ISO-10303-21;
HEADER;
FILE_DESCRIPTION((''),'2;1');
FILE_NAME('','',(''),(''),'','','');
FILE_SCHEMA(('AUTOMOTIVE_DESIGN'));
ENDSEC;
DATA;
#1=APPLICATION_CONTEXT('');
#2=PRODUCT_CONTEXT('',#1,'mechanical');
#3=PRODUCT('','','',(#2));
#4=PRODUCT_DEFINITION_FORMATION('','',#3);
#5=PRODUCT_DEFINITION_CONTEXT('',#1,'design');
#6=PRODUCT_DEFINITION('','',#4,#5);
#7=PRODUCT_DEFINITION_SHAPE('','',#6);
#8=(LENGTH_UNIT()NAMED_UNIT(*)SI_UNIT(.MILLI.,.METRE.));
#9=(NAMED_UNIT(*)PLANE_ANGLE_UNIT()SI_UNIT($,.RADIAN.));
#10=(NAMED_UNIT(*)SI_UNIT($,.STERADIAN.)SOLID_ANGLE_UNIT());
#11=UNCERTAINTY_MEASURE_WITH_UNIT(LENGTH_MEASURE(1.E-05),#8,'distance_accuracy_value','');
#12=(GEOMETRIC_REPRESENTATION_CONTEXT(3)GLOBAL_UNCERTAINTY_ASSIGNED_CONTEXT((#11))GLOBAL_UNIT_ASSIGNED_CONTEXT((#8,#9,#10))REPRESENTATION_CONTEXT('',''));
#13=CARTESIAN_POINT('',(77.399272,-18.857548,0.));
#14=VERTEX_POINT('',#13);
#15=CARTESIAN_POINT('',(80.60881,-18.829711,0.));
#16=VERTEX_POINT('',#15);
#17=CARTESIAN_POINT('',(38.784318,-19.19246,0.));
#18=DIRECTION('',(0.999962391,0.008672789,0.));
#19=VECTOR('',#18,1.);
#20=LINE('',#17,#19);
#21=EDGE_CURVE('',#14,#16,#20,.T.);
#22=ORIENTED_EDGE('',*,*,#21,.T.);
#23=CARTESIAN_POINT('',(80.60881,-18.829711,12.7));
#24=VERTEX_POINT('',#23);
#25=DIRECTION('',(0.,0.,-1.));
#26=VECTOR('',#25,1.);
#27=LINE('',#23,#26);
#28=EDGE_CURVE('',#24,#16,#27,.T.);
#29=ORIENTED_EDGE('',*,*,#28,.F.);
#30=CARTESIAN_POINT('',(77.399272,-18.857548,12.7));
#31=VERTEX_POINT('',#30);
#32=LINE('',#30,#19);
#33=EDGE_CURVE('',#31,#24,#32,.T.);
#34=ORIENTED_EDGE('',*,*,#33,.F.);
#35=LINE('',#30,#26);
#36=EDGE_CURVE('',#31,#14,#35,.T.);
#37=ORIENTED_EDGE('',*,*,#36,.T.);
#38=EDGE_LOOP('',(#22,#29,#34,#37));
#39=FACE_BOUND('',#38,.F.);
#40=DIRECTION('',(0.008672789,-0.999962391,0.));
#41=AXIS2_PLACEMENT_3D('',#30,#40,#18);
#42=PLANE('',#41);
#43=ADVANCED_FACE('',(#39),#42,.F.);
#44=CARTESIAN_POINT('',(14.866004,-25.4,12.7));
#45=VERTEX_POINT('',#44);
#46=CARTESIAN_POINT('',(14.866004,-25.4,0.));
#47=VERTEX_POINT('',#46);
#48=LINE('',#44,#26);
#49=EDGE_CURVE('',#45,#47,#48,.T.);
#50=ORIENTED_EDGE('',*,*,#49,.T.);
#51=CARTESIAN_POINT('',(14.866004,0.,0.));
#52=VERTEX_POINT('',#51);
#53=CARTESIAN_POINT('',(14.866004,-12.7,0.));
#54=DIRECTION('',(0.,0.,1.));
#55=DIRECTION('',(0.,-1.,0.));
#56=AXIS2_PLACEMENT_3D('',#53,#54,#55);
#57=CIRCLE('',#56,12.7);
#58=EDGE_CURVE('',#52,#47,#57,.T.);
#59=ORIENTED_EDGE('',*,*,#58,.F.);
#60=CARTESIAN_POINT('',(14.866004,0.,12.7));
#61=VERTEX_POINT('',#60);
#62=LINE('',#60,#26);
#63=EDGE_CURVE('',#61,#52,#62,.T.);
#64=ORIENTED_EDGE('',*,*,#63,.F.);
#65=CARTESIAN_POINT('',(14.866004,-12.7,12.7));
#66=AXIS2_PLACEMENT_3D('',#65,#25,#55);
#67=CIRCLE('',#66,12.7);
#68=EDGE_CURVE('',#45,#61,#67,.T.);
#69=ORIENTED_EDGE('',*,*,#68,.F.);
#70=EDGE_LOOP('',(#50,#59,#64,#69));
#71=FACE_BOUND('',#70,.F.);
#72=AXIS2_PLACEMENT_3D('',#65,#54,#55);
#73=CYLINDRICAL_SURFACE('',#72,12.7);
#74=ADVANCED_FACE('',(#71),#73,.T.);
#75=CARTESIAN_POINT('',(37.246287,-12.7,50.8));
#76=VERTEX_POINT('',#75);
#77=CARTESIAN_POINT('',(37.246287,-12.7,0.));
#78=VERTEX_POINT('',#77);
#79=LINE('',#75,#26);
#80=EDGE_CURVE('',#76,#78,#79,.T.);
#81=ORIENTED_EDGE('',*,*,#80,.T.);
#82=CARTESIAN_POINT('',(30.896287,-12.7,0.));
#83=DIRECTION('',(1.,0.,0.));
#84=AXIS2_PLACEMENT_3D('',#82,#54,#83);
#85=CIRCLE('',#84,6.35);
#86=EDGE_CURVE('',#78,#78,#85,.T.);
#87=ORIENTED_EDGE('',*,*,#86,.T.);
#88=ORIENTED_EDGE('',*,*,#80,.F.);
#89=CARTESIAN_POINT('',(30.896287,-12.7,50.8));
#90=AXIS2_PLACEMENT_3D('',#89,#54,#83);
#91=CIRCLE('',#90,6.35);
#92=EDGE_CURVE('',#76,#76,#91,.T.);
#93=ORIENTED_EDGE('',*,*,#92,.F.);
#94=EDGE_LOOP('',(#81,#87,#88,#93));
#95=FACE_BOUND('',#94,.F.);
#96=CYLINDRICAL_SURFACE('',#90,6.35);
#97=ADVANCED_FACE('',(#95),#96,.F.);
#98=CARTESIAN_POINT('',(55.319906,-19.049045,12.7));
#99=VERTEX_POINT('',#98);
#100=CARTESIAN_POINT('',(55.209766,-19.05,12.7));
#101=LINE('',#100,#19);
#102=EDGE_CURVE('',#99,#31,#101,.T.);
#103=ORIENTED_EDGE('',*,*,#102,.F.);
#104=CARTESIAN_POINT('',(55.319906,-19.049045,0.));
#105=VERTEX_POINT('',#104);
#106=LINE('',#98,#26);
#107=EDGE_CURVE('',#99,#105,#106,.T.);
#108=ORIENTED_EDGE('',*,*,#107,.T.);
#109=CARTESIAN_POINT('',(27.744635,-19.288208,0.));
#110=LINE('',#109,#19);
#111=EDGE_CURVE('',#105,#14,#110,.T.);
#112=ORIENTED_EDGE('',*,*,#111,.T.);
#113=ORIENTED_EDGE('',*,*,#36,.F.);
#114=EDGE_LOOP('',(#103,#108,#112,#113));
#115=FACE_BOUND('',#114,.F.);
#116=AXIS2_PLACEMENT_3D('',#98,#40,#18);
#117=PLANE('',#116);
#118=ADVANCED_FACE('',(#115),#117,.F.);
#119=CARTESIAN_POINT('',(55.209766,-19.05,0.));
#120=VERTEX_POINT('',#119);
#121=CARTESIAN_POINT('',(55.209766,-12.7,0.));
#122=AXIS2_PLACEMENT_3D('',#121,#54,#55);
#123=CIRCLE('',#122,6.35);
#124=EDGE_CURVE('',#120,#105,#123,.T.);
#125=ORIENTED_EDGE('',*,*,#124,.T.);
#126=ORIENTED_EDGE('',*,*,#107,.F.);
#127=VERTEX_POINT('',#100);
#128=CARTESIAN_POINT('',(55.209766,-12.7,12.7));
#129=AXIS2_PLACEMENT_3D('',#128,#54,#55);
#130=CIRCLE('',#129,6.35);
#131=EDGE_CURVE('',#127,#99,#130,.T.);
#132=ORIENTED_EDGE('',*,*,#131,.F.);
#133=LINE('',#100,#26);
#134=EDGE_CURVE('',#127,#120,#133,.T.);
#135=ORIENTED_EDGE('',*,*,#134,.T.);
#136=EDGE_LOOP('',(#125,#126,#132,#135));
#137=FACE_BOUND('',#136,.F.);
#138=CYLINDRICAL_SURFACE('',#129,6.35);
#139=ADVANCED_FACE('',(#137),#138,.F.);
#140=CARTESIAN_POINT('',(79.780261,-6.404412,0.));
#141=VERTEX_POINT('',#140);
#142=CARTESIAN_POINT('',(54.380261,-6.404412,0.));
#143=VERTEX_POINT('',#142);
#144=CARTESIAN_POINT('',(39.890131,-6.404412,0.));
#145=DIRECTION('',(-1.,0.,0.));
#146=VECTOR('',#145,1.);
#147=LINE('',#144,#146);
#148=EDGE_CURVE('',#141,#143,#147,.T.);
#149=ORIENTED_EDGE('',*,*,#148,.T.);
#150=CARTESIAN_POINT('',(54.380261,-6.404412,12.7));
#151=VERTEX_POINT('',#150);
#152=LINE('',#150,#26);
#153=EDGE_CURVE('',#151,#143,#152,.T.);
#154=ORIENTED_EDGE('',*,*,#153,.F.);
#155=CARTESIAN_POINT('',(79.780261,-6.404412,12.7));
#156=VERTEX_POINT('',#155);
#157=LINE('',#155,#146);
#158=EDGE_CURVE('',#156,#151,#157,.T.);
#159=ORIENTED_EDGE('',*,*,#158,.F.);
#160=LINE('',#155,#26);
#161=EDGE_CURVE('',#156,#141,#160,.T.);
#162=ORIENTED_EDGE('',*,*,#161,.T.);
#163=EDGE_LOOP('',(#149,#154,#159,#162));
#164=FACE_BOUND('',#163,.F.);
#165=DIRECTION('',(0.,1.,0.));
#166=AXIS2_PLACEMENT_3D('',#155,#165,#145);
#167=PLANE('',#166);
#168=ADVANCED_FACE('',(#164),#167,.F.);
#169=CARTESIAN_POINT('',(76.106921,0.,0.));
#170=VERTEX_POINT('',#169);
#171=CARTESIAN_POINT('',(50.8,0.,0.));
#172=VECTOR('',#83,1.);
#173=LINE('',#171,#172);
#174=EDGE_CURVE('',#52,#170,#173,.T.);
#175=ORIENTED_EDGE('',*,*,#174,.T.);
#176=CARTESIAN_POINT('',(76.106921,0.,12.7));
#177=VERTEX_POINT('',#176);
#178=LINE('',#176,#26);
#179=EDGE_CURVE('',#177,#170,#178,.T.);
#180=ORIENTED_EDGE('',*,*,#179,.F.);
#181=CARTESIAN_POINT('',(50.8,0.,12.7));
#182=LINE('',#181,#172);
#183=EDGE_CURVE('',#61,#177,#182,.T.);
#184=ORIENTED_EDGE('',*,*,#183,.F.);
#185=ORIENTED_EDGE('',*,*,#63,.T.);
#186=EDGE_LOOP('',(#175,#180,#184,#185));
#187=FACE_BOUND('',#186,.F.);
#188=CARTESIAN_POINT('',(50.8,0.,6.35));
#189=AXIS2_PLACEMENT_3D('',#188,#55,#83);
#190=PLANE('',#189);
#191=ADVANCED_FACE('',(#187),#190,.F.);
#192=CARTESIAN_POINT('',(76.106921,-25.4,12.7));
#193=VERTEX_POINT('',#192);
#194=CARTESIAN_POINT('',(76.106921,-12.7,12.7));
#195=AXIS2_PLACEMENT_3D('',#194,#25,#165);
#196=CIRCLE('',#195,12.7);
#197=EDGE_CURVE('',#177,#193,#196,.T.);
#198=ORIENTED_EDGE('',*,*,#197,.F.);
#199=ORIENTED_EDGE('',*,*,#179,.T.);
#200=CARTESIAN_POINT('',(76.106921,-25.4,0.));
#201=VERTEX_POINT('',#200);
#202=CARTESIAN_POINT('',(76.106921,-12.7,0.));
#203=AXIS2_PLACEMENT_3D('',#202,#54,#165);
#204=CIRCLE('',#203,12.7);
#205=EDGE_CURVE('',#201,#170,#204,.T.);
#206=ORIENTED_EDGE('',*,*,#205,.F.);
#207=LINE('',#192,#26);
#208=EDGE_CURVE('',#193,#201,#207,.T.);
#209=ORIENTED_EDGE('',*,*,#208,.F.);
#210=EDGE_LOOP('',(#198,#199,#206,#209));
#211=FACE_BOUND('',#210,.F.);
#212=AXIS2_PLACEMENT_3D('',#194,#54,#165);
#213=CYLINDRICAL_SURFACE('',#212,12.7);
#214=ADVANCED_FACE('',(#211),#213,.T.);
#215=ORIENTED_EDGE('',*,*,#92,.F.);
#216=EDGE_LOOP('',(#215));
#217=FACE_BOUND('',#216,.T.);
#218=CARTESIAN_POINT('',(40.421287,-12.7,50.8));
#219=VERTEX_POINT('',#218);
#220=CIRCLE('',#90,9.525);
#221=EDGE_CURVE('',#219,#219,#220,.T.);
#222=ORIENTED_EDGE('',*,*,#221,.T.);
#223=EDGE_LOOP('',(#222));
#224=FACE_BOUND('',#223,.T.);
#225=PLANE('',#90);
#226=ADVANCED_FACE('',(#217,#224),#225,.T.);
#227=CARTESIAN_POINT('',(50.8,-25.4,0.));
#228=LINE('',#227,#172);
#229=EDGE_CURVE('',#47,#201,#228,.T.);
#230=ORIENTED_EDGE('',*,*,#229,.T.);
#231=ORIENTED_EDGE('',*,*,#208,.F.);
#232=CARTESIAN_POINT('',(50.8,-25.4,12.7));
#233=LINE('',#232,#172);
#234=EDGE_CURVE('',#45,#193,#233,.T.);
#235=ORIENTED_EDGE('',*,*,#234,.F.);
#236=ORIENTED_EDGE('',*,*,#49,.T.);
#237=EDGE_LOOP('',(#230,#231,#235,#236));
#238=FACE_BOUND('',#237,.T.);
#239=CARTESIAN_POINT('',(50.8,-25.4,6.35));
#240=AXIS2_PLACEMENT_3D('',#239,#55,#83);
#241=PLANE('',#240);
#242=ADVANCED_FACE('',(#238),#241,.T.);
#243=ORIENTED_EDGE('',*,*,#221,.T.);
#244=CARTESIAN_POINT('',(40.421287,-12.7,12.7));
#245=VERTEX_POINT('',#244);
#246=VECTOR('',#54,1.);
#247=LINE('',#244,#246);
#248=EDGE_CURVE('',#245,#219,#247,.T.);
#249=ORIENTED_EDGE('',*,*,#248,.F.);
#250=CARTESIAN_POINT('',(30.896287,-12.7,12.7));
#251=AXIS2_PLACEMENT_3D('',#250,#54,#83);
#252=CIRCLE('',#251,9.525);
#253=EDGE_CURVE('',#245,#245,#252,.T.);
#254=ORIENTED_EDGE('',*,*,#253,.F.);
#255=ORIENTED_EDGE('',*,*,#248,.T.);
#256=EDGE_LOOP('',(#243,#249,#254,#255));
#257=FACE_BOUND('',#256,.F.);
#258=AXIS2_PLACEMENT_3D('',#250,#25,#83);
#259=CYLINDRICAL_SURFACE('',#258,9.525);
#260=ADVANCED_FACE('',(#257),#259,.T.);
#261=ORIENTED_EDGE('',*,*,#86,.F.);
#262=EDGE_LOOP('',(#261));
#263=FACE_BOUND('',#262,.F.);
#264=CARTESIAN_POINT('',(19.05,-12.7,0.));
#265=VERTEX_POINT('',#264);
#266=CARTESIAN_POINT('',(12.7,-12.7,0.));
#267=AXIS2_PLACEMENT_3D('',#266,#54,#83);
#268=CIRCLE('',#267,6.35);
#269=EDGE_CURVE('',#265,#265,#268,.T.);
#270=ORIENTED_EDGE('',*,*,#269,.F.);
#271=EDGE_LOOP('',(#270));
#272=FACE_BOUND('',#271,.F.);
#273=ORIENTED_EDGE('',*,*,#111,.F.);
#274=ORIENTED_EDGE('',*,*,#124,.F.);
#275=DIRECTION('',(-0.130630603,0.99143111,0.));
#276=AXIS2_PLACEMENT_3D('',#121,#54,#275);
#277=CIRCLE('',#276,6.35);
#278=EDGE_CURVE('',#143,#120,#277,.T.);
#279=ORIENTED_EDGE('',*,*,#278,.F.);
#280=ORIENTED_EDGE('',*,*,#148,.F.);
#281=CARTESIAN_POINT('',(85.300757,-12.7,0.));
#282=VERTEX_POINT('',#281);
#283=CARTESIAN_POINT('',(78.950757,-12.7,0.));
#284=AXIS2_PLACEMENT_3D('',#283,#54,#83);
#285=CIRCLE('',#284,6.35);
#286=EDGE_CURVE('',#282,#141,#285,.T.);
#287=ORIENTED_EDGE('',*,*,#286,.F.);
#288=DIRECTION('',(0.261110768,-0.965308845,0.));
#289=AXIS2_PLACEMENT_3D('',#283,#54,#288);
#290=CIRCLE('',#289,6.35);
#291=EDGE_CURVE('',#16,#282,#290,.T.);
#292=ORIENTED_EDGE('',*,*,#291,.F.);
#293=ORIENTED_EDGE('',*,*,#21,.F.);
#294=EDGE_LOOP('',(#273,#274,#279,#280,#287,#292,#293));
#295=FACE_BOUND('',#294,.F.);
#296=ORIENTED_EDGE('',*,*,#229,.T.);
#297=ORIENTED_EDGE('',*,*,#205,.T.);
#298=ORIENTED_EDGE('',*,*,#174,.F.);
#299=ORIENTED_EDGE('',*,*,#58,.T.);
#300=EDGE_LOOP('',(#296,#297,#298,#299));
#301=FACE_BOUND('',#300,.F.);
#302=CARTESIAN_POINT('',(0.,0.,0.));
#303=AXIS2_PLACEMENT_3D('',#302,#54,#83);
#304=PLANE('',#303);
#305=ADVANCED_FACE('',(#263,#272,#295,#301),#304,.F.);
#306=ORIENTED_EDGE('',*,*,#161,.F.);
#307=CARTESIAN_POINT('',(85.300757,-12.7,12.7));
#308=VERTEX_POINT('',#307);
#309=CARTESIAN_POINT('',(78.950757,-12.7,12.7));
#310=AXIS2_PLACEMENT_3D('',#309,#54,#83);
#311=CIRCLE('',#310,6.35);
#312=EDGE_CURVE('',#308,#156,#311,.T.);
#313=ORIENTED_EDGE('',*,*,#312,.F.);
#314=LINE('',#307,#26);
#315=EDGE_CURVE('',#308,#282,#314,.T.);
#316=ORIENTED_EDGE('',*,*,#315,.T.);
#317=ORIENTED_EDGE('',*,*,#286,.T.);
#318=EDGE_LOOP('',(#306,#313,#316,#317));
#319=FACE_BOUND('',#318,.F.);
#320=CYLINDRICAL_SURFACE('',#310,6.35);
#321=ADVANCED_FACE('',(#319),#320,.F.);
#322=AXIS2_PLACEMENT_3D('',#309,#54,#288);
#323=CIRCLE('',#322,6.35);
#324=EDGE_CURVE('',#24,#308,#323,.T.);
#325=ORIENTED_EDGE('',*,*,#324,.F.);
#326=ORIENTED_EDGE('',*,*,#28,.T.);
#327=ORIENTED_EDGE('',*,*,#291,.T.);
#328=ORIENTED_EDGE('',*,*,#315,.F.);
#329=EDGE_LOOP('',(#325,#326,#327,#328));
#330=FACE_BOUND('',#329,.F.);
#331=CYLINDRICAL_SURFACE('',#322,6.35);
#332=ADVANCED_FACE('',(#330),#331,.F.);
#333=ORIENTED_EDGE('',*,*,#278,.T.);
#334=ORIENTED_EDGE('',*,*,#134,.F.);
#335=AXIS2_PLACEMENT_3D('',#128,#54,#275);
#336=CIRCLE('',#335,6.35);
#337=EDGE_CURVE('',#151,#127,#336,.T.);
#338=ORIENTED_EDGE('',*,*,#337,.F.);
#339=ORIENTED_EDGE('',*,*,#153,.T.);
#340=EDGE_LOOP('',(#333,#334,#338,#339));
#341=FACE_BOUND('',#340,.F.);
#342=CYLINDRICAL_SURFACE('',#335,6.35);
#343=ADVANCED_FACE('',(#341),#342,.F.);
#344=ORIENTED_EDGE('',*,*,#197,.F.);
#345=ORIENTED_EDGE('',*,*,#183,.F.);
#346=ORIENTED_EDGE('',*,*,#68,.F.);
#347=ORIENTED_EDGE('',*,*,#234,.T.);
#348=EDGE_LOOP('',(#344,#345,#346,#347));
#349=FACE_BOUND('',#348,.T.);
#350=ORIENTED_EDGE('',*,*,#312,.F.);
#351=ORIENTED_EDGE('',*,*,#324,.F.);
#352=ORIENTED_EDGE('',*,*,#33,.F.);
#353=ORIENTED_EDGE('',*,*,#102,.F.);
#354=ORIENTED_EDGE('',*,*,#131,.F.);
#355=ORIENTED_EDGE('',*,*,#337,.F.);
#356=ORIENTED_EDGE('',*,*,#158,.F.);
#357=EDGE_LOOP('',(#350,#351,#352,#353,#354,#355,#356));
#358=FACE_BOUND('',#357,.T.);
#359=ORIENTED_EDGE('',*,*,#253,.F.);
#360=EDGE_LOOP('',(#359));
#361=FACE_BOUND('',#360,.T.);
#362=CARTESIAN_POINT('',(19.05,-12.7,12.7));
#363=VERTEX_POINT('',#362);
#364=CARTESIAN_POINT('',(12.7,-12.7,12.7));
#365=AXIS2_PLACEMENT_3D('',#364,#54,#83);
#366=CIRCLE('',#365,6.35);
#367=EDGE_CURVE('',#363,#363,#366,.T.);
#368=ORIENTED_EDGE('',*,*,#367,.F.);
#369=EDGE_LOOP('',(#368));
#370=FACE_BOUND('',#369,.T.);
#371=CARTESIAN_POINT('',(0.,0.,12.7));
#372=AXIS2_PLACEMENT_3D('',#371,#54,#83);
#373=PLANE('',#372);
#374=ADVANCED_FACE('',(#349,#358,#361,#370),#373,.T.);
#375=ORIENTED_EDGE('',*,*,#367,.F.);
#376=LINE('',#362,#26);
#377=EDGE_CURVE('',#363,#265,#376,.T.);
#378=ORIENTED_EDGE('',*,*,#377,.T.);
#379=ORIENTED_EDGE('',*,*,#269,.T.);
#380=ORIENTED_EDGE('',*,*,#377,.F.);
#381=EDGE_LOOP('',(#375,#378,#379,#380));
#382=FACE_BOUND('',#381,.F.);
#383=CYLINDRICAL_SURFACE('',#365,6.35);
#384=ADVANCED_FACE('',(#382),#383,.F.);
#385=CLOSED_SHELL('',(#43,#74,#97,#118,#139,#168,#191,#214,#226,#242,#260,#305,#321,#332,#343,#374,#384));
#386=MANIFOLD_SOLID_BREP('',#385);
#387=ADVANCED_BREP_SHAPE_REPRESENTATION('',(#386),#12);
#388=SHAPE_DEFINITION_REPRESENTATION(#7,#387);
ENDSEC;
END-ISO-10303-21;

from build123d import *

# Parameters (mm, degrees)
F0_W      = 101.6
F0_H      = 12.7
F1_DEPTH  = 25.4
F2_R      = 6.35
F3_DEPTH  = 25.4
F4_R      = 9.525
F5_DEPTH  = 38.1
F6_R      = 6.35
F7_DEPTH  = 50.8
F9_DEPTH  = 25.4
F11_DEPTH = 25.4
F13_DEPTH = 25.4


with BuildPart() as f1:
    # F0 (on Front) → F1 (new body)
    with BuildSketch(Plane.XZ):
        with Locations((50.8, 6.35)):
            Rectangle(F0_W, F0_H)
    extrude(amount=F1_DEPTH)

    # F2 (on face) → F3 (cut)
    with BuildSketch(Plane.XY.offset(12.7)):
        with Locations((12.7, -12.7)):
            Circle(F2_R)
    extrude(amount=-F3_DEPTH, mode=Mode.SUBTRACT)

    # F4 (on face) → F5 (join)
    with BuildSketch(Plane.XY.offset(12.7)):
        with Locations((30.8962874115, -12.7)):
            Circle(F4_R)
    extrude(amount=F5_DEPTH)

    # F6 (on face) → F7 (cut)
    with BuildSketch(Plane.XY.offset(50.8)):
        with Locations((30.8962874115, -12.7)):
            Circle(F6_R)
    extrude(amount=-F7_DEPTH, mode=Mode.SUBTRACT)

    # F8 (on face) → F9 (cut)
    with BuildSketch(Plane.XY.offset(12.7)):
        with BuildLine():
            ThreePointArc((61.5597656887, -12.7), (59.6998937492, -17.1901280605), (55.2097656887, -19.05))
            Line((55.2097656887, -19.05), (77.399272464, -18.8575478586))
            ThreePointArc((77.399272464, -18.8575478586), (72.6114019876, -12.3324709451), (78.1212527055, -6.4044124523))
            Line((78.1212527055, -6.4044124523), (56.0392700164, -6.4044124523))
            ThreePointArc((56.0392700164, -6.4044124523), (59.9841689227, -8.5134054699), (61.5597656887, -12.7))
        make_face()
        with BuildLine():
            Line((56.0392700164, -6.4044124523), (54.3802613609, -6.4044124523))
            ThreePointArc((54.3802613609, -6.4044124523), (48.8733834035, -13.1156435206), (55.2097656887, -19.05))
            ThreePointArc((55.2097656887, -19.05), (59.6998937492, -17.1901280605), (61.5597656887, -12.7))
            ThreePointArc((61.5597656887, -12.7), (59.9841689227, -8.5134054699), (56.0392700164, -6.4044124523))
        make_face()
        with BuildLine():
            ThreePointArc((78.1212527055, -6.4044124523), (72.6114019876, -12.3324709451), (77.399272464, -18.8575478586))
            Line((77.399272464, -18.8575478586), (80.6088104115, -18.8297111673))
            ThreePointArc((80.6088104115, -18.8297111673), (83.9931343967, -16.5596541975), (85.3007570332, -12.7))
            ThreePointArc((85.3007570332, -12.7), (83.7251602672, -8.5134054699), (79.7802613609, -6.4044124523))
            Line((79.7802613609, -6.4044124523), (78.1212527055, -6.4044124523))
        make_face()
    extrude(amount=-F9_DEPTH, mode=Mode.SUBTRACT)

    # F10 (on face) → F11 (cut)
    with BuildSketch(Plane.XY.offset(12.7)):
        with BuildLine():
            ThreePointArc((76.106920933, 0), (88.806920933, -12.7), (76.106920933, -25.4))
            Line((76.106920933, -25.4), (101.6, -25.4))
            Line((101.6, -25.4), (101.6, 0))
            Line((101.6, 0), (76.106920933, 0))
        make_face()
    extrude(amount=-F11_DEPTH, mode=Mode.SUBTRACT)

    # F12 (on face) → F13 (cut)
    with BuildSketch(Plane.XY.offset(12.7)):
        with BuildLine():
            ThreePointArc((14.8660039439, -25.4), (2.1660039439, -12.7), (14.8660039439, 0))
            Line((14.8660039439, 0), (0, 0))
            Line((0, 0), (0, -25.4))
            Line((0, -25.4), (14.8660039439, -25.4))
        make_face()
    extrude(amount=-F13_DEPTH, mode=Mode.SUBTRACT)


solid = f1.part
